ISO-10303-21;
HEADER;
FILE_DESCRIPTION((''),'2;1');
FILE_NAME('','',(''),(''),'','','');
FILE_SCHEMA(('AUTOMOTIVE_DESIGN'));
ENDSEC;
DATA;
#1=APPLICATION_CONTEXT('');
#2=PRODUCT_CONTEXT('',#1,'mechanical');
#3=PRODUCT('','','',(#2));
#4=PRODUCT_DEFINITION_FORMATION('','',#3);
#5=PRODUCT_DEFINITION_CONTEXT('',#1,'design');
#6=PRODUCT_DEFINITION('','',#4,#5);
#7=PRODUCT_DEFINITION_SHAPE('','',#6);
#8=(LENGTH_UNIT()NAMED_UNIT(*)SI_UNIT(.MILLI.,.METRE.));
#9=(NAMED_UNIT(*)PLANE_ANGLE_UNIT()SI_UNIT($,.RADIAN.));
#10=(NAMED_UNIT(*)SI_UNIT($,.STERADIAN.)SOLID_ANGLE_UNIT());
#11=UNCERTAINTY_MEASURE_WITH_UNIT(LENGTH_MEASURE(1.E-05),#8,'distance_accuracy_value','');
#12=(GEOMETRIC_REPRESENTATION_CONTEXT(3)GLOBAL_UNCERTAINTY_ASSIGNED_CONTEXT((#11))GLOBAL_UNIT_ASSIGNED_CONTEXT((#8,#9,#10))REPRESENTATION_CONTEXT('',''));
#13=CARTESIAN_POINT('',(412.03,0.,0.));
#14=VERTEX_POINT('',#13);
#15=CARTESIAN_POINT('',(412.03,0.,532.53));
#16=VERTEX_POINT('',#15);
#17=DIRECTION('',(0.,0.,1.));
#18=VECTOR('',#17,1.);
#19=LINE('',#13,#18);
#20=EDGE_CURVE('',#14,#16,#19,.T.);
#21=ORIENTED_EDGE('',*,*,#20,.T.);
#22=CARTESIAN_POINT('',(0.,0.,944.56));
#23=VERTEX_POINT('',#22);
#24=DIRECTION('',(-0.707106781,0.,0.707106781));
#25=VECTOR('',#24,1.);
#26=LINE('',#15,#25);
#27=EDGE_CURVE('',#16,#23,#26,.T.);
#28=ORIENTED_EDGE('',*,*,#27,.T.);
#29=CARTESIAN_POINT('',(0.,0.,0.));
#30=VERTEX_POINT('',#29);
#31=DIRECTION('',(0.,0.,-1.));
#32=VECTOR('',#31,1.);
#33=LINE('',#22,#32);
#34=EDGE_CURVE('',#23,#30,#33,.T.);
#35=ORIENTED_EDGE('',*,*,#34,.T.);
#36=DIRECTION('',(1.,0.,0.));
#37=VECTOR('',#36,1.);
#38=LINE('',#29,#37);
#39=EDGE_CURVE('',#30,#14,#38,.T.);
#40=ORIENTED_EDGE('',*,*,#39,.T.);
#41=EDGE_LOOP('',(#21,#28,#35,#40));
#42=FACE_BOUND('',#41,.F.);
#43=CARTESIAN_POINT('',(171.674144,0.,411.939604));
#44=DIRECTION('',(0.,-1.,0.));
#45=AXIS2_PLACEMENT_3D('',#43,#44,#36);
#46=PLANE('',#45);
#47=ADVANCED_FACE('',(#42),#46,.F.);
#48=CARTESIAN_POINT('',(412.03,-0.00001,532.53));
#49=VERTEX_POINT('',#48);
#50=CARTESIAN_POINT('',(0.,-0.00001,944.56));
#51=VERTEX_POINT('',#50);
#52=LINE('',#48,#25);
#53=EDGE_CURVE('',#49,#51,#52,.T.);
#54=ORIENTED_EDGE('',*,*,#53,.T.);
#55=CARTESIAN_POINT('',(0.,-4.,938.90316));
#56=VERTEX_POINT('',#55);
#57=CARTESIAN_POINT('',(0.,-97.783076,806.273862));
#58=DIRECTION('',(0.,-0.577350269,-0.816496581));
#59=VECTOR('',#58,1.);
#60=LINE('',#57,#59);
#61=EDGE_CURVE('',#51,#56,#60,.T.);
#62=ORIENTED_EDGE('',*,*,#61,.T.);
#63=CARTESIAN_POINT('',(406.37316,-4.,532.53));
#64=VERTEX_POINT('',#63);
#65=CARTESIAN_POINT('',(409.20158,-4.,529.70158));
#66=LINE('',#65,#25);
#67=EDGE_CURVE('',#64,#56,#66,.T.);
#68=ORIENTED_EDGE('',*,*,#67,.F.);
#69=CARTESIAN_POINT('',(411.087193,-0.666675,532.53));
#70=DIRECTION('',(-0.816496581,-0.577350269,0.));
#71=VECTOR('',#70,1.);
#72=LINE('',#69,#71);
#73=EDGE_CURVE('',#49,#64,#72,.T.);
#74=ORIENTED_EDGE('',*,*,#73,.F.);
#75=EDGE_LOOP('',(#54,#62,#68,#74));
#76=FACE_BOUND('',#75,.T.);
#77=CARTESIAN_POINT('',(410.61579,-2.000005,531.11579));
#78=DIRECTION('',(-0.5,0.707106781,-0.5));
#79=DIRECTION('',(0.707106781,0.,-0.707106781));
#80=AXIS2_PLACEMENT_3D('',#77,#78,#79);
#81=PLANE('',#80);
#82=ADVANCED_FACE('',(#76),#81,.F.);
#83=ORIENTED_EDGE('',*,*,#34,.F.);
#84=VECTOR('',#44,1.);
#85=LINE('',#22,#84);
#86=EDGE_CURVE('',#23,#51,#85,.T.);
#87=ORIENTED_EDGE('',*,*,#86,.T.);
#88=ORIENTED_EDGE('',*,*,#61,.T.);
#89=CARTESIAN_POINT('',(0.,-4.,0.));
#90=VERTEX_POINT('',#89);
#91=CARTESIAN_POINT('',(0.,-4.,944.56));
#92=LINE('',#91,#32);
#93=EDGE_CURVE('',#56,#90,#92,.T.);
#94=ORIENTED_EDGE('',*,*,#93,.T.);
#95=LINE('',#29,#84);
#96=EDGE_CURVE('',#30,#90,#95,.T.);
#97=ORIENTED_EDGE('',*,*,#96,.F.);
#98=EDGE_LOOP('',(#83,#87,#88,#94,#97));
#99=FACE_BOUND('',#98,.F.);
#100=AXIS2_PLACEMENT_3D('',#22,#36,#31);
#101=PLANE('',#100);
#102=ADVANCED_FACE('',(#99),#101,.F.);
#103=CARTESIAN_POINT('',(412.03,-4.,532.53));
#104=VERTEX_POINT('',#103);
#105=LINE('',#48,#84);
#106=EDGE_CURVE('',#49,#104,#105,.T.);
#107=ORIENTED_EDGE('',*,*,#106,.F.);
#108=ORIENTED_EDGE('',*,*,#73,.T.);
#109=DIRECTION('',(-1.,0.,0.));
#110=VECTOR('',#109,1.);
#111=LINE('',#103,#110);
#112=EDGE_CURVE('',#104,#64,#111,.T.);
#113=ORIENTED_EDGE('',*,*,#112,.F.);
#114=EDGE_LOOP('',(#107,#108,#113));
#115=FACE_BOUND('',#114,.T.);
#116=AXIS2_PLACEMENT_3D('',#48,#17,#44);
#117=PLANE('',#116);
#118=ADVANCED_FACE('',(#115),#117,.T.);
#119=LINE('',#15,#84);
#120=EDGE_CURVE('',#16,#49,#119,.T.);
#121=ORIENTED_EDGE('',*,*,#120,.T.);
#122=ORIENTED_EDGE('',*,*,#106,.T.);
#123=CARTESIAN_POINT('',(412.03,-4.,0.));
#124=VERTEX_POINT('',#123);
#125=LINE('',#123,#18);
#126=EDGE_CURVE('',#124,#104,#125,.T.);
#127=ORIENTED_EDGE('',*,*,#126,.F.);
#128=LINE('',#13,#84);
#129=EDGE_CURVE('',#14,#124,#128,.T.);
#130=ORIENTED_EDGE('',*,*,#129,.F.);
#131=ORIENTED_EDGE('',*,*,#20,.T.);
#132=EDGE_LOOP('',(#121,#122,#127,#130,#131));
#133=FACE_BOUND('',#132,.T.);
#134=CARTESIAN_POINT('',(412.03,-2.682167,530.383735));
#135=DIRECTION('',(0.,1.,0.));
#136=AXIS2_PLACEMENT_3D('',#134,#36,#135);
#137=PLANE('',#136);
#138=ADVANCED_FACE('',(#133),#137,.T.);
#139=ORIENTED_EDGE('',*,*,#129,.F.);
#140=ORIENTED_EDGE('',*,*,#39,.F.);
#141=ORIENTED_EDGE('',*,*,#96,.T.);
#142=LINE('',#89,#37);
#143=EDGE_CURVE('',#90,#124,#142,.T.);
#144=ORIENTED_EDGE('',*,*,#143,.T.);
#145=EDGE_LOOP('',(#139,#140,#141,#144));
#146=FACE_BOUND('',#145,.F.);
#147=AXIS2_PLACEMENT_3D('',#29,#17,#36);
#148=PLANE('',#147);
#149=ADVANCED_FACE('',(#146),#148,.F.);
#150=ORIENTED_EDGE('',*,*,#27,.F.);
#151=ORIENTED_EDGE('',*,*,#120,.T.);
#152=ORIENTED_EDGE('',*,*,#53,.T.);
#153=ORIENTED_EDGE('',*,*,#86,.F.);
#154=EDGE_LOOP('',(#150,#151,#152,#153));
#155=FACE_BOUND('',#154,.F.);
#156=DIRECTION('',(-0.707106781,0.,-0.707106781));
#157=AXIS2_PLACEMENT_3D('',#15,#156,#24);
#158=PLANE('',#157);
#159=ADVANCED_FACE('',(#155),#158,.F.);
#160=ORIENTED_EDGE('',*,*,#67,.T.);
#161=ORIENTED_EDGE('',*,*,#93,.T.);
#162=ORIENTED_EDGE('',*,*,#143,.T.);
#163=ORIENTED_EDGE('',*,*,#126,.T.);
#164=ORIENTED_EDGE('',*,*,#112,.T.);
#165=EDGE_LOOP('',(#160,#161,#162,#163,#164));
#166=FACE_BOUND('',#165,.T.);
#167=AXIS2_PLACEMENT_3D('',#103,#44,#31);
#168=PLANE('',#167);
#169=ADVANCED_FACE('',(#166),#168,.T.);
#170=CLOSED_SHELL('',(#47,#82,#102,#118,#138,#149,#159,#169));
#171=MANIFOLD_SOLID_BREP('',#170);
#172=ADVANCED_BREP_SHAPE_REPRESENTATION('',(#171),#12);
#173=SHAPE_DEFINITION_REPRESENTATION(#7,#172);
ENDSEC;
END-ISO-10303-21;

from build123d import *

# Parameters (mm, degrees)
F1_DEPTH = 4
F2_SIZE  = 3.99999
F4_DEPTH = 25


# Not quite as in the source:
# - a fillet or chamfer is up to 0.001 mm smaller than in the source, because OpenCascade refuses the exact size
# - ends of sketch curves that miss each other by under 0.0002 mm in the source are joined


with BuildPart() as f1:
    # F0 (on Front) → F1 (new body)
    with BuildSketch(Plane.XZ):
        Polygon((0, 944.56), (0, 0), (412.03, 0), (412.03, 532.53), align=None)
    extrude(amount=F1_DEPTH)

    # F2 (size 4 in the source; OpenCascade refuses exactly that, so slightly less here)
    f2_edges = [f1.edges().sort_by_distance(p)[0] for p in [
        (206.015, -4, 738.545),
    ]]
    chamfer(f2_edges, length=F2_SIZE)

    # F3 (on face) → F4 (join)
    with BuildSketch(Plane.YZ.offset(412.03)):
        Polygon((-4, 532.53), (-4, 526.8731457505), (-1e-05, 532.53), align=None)
    extrude(amount=-F4_DEPTH)


solid = f1.part
